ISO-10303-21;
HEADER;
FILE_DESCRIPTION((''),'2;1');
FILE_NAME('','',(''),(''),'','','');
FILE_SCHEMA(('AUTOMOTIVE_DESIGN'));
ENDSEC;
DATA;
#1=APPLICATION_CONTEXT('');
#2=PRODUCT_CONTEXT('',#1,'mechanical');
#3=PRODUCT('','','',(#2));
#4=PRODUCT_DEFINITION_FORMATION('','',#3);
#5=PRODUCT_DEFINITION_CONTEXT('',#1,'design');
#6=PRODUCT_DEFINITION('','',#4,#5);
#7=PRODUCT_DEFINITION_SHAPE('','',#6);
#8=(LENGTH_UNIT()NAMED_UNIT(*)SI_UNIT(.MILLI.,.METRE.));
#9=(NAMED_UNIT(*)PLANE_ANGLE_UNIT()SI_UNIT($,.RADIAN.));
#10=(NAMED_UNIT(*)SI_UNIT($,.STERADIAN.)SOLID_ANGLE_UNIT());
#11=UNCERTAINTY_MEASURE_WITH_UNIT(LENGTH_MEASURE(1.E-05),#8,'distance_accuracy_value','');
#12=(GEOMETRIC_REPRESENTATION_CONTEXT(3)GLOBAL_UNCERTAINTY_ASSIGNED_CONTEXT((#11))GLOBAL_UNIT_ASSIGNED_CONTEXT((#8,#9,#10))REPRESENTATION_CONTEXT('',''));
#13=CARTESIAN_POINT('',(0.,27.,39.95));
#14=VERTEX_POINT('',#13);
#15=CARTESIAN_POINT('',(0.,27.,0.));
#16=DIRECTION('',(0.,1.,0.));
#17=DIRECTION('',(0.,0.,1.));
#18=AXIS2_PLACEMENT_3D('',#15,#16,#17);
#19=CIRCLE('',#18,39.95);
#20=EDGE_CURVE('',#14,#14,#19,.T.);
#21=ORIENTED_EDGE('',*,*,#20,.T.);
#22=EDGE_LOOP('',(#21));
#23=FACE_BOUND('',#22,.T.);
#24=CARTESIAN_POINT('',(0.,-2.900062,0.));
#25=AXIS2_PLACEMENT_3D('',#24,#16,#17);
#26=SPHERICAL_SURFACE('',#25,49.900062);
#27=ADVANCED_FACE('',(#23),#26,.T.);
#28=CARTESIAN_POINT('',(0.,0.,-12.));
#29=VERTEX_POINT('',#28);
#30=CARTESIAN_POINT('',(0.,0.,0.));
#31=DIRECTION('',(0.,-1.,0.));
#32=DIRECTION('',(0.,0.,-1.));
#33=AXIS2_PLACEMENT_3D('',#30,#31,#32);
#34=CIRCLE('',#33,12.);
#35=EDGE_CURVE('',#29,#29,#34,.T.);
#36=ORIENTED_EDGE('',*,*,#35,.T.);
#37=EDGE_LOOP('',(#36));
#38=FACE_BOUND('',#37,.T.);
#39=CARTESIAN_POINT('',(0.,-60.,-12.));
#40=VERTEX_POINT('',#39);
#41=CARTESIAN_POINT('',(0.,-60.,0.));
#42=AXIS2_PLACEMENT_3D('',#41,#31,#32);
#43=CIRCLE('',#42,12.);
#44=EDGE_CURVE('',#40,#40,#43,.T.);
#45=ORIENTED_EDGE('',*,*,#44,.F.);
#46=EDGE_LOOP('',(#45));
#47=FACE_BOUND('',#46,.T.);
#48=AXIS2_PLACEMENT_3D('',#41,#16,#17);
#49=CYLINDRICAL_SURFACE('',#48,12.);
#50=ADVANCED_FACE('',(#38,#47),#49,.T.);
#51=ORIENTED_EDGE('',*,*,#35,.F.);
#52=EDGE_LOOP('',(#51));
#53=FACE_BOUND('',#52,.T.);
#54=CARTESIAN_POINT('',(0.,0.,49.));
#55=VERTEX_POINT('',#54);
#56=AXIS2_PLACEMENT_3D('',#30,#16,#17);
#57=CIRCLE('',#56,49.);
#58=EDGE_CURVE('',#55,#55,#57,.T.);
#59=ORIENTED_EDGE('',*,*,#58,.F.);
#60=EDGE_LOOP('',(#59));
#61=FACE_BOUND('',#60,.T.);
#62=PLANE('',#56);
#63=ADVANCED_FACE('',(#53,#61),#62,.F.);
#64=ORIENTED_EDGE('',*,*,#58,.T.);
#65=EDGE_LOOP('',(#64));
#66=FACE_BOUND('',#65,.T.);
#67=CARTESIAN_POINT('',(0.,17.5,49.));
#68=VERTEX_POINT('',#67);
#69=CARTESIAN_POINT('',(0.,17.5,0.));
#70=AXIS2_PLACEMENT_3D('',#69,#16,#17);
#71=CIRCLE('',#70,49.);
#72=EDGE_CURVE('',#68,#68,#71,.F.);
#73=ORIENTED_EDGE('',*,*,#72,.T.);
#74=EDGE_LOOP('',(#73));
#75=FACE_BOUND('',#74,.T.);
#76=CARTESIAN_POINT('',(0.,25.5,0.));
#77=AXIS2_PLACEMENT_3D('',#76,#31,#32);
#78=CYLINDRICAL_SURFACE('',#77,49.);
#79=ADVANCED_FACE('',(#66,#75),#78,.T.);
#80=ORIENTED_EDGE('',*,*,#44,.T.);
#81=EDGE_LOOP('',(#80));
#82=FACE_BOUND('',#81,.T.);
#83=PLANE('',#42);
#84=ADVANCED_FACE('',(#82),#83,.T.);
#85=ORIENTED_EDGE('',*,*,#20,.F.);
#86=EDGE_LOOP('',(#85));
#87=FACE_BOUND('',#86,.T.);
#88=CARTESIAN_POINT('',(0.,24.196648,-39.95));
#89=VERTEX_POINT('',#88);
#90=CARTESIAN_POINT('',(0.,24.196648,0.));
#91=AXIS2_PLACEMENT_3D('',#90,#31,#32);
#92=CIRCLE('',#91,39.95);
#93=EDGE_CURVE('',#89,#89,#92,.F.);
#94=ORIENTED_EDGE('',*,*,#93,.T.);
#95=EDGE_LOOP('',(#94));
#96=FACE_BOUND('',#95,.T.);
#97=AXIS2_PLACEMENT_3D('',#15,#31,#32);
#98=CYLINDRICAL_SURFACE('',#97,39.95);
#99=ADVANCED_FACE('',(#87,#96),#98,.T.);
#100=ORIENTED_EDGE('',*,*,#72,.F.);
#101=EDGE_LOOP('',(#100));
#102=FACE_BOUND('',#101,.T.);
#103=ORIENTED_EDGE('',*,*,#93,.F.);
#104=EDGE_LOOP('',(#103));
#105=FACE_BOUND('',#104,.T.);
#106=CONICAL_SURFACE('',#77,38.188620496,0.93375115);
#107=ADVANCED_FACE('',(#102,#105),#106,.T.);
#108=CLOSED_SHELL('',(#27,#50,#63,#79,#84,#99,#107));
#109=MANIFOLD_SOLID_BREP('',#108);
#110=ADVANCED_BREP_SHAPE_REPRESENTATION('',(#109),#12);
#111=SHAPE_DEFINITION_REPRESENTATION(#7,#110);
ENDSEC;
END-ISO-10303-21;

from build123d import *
from build123d.topology import SkipClean

# Parameters (mm, degrees)
SKETCH1_R           = 49
BOSS_EXTRUDE1_DEPTH = 25.5
SKETCH2_R           = 39.95
BOSS_EXTRUDE2_DEPTH = 1.5
DOME1_FACE_RADIUS   = 39.95
DOME1_HEIGHT        = 20
CHAMFER1_SIZE       = 8
CHAMFER1_SIZE_2     = 10.811379504
SKETCH3_R           = 12
BOSS_EXTRUDE3_DEPTH = 60


with BuildPart() as part:
    # Sketch1 → Boss-Extrude1 (new body)
    with BuildSketch(Plane(origin=(0, 0, 0), x_dir=(1, 0, 0), z_dir=(0, 1, 0))):
        with Locations(Location((0, 0, 0), (0, 0, 270))):
            Circle(SKETCH1_R)
    extrude(amount=BOSS_EXTRUDE1_DEPTH)

    # Sketch2 → Boss-Extrude2 (add)
    with BuildSketch(Plane(origin=(0, 25.5, 0), x_dir=(1, 0, 0), z_dir=(0, 1, 0))):
        with Locations(Location((0, 0, 0), (0, 0, 270))):
            Circle(SKETCH2_R)
    extrude(amount=BOSS_EXTRUDE2_DEPTH)

    # Dome1: a dome of height H over a round flat face of radius A is a cap of a sphere of radius (A * A + H * H) / (2 * H)
    dome1_r = (DOME1_FACE_RADIUS * DOME1_FACE_RADIUS + DOME1_HEIGHT * DOME1_HEIGHT) / (2 * DOME1_HEIGHT)
    dome1_base = Plane((0, 27, 0), z_dir=(0, 1, 0))
    with Locations(dome1_base.offset(DOME1_HEIGHT - dome1_r)):
        dome1_ball = Sphere(dome1_r, mode=Mode.PRIVATE)
    add(split(dome1_ball, bisect_by=dome1_base, keep=Keep.TOP, mode=Mode.PRIVATE))

    # Chamfer1
    # the kernel refuses this chamfer: 10.811379504, 8 mm, written as the material it takes off along each edge
    with BuildSketch(Plane(origin=(0, 25.5, 0), x_dir=(0, 0, 1), z_dir=(-1, 0, 0))) as chamfer1_piece_1_section:
        Polygon((49, -CHAMFER1_SIZE), (49 - CHAMFER1_SIZE_2, 0), (49, 0), align=None)
    chamfer1_piece_1 = revolve(axis=Axis((0, 25.5, 0), (0, 1, 0)), mode=Mode.PRIVATE)
    chamfer1_piece_1 = chamfer1_piece_1 - Plane(origin=(0, 20.910194106, 0), x_dir=(0, 0, 1), z_dir=(0, -1, 0)) * Cylinder(39.95, 196, mode=Mode.PRIVATE)
    add(chamfer1_piece_1, mode=Mode.SUBTRACT)

    # Sketch3 → Boss-Extrude3 (add)
    with SkipClean():  # the faces are left unmerged after this step: merging them gives an invalid solid
        with BuildSketch(Plane.XZ):
            with Locations(Location((0, 0, 0), (0, 0, 270))):
                Circle(SKETCH3_R)
        extrude(amount=BOSS_EXTRUDE3_DEPTH)


solid = part.part
